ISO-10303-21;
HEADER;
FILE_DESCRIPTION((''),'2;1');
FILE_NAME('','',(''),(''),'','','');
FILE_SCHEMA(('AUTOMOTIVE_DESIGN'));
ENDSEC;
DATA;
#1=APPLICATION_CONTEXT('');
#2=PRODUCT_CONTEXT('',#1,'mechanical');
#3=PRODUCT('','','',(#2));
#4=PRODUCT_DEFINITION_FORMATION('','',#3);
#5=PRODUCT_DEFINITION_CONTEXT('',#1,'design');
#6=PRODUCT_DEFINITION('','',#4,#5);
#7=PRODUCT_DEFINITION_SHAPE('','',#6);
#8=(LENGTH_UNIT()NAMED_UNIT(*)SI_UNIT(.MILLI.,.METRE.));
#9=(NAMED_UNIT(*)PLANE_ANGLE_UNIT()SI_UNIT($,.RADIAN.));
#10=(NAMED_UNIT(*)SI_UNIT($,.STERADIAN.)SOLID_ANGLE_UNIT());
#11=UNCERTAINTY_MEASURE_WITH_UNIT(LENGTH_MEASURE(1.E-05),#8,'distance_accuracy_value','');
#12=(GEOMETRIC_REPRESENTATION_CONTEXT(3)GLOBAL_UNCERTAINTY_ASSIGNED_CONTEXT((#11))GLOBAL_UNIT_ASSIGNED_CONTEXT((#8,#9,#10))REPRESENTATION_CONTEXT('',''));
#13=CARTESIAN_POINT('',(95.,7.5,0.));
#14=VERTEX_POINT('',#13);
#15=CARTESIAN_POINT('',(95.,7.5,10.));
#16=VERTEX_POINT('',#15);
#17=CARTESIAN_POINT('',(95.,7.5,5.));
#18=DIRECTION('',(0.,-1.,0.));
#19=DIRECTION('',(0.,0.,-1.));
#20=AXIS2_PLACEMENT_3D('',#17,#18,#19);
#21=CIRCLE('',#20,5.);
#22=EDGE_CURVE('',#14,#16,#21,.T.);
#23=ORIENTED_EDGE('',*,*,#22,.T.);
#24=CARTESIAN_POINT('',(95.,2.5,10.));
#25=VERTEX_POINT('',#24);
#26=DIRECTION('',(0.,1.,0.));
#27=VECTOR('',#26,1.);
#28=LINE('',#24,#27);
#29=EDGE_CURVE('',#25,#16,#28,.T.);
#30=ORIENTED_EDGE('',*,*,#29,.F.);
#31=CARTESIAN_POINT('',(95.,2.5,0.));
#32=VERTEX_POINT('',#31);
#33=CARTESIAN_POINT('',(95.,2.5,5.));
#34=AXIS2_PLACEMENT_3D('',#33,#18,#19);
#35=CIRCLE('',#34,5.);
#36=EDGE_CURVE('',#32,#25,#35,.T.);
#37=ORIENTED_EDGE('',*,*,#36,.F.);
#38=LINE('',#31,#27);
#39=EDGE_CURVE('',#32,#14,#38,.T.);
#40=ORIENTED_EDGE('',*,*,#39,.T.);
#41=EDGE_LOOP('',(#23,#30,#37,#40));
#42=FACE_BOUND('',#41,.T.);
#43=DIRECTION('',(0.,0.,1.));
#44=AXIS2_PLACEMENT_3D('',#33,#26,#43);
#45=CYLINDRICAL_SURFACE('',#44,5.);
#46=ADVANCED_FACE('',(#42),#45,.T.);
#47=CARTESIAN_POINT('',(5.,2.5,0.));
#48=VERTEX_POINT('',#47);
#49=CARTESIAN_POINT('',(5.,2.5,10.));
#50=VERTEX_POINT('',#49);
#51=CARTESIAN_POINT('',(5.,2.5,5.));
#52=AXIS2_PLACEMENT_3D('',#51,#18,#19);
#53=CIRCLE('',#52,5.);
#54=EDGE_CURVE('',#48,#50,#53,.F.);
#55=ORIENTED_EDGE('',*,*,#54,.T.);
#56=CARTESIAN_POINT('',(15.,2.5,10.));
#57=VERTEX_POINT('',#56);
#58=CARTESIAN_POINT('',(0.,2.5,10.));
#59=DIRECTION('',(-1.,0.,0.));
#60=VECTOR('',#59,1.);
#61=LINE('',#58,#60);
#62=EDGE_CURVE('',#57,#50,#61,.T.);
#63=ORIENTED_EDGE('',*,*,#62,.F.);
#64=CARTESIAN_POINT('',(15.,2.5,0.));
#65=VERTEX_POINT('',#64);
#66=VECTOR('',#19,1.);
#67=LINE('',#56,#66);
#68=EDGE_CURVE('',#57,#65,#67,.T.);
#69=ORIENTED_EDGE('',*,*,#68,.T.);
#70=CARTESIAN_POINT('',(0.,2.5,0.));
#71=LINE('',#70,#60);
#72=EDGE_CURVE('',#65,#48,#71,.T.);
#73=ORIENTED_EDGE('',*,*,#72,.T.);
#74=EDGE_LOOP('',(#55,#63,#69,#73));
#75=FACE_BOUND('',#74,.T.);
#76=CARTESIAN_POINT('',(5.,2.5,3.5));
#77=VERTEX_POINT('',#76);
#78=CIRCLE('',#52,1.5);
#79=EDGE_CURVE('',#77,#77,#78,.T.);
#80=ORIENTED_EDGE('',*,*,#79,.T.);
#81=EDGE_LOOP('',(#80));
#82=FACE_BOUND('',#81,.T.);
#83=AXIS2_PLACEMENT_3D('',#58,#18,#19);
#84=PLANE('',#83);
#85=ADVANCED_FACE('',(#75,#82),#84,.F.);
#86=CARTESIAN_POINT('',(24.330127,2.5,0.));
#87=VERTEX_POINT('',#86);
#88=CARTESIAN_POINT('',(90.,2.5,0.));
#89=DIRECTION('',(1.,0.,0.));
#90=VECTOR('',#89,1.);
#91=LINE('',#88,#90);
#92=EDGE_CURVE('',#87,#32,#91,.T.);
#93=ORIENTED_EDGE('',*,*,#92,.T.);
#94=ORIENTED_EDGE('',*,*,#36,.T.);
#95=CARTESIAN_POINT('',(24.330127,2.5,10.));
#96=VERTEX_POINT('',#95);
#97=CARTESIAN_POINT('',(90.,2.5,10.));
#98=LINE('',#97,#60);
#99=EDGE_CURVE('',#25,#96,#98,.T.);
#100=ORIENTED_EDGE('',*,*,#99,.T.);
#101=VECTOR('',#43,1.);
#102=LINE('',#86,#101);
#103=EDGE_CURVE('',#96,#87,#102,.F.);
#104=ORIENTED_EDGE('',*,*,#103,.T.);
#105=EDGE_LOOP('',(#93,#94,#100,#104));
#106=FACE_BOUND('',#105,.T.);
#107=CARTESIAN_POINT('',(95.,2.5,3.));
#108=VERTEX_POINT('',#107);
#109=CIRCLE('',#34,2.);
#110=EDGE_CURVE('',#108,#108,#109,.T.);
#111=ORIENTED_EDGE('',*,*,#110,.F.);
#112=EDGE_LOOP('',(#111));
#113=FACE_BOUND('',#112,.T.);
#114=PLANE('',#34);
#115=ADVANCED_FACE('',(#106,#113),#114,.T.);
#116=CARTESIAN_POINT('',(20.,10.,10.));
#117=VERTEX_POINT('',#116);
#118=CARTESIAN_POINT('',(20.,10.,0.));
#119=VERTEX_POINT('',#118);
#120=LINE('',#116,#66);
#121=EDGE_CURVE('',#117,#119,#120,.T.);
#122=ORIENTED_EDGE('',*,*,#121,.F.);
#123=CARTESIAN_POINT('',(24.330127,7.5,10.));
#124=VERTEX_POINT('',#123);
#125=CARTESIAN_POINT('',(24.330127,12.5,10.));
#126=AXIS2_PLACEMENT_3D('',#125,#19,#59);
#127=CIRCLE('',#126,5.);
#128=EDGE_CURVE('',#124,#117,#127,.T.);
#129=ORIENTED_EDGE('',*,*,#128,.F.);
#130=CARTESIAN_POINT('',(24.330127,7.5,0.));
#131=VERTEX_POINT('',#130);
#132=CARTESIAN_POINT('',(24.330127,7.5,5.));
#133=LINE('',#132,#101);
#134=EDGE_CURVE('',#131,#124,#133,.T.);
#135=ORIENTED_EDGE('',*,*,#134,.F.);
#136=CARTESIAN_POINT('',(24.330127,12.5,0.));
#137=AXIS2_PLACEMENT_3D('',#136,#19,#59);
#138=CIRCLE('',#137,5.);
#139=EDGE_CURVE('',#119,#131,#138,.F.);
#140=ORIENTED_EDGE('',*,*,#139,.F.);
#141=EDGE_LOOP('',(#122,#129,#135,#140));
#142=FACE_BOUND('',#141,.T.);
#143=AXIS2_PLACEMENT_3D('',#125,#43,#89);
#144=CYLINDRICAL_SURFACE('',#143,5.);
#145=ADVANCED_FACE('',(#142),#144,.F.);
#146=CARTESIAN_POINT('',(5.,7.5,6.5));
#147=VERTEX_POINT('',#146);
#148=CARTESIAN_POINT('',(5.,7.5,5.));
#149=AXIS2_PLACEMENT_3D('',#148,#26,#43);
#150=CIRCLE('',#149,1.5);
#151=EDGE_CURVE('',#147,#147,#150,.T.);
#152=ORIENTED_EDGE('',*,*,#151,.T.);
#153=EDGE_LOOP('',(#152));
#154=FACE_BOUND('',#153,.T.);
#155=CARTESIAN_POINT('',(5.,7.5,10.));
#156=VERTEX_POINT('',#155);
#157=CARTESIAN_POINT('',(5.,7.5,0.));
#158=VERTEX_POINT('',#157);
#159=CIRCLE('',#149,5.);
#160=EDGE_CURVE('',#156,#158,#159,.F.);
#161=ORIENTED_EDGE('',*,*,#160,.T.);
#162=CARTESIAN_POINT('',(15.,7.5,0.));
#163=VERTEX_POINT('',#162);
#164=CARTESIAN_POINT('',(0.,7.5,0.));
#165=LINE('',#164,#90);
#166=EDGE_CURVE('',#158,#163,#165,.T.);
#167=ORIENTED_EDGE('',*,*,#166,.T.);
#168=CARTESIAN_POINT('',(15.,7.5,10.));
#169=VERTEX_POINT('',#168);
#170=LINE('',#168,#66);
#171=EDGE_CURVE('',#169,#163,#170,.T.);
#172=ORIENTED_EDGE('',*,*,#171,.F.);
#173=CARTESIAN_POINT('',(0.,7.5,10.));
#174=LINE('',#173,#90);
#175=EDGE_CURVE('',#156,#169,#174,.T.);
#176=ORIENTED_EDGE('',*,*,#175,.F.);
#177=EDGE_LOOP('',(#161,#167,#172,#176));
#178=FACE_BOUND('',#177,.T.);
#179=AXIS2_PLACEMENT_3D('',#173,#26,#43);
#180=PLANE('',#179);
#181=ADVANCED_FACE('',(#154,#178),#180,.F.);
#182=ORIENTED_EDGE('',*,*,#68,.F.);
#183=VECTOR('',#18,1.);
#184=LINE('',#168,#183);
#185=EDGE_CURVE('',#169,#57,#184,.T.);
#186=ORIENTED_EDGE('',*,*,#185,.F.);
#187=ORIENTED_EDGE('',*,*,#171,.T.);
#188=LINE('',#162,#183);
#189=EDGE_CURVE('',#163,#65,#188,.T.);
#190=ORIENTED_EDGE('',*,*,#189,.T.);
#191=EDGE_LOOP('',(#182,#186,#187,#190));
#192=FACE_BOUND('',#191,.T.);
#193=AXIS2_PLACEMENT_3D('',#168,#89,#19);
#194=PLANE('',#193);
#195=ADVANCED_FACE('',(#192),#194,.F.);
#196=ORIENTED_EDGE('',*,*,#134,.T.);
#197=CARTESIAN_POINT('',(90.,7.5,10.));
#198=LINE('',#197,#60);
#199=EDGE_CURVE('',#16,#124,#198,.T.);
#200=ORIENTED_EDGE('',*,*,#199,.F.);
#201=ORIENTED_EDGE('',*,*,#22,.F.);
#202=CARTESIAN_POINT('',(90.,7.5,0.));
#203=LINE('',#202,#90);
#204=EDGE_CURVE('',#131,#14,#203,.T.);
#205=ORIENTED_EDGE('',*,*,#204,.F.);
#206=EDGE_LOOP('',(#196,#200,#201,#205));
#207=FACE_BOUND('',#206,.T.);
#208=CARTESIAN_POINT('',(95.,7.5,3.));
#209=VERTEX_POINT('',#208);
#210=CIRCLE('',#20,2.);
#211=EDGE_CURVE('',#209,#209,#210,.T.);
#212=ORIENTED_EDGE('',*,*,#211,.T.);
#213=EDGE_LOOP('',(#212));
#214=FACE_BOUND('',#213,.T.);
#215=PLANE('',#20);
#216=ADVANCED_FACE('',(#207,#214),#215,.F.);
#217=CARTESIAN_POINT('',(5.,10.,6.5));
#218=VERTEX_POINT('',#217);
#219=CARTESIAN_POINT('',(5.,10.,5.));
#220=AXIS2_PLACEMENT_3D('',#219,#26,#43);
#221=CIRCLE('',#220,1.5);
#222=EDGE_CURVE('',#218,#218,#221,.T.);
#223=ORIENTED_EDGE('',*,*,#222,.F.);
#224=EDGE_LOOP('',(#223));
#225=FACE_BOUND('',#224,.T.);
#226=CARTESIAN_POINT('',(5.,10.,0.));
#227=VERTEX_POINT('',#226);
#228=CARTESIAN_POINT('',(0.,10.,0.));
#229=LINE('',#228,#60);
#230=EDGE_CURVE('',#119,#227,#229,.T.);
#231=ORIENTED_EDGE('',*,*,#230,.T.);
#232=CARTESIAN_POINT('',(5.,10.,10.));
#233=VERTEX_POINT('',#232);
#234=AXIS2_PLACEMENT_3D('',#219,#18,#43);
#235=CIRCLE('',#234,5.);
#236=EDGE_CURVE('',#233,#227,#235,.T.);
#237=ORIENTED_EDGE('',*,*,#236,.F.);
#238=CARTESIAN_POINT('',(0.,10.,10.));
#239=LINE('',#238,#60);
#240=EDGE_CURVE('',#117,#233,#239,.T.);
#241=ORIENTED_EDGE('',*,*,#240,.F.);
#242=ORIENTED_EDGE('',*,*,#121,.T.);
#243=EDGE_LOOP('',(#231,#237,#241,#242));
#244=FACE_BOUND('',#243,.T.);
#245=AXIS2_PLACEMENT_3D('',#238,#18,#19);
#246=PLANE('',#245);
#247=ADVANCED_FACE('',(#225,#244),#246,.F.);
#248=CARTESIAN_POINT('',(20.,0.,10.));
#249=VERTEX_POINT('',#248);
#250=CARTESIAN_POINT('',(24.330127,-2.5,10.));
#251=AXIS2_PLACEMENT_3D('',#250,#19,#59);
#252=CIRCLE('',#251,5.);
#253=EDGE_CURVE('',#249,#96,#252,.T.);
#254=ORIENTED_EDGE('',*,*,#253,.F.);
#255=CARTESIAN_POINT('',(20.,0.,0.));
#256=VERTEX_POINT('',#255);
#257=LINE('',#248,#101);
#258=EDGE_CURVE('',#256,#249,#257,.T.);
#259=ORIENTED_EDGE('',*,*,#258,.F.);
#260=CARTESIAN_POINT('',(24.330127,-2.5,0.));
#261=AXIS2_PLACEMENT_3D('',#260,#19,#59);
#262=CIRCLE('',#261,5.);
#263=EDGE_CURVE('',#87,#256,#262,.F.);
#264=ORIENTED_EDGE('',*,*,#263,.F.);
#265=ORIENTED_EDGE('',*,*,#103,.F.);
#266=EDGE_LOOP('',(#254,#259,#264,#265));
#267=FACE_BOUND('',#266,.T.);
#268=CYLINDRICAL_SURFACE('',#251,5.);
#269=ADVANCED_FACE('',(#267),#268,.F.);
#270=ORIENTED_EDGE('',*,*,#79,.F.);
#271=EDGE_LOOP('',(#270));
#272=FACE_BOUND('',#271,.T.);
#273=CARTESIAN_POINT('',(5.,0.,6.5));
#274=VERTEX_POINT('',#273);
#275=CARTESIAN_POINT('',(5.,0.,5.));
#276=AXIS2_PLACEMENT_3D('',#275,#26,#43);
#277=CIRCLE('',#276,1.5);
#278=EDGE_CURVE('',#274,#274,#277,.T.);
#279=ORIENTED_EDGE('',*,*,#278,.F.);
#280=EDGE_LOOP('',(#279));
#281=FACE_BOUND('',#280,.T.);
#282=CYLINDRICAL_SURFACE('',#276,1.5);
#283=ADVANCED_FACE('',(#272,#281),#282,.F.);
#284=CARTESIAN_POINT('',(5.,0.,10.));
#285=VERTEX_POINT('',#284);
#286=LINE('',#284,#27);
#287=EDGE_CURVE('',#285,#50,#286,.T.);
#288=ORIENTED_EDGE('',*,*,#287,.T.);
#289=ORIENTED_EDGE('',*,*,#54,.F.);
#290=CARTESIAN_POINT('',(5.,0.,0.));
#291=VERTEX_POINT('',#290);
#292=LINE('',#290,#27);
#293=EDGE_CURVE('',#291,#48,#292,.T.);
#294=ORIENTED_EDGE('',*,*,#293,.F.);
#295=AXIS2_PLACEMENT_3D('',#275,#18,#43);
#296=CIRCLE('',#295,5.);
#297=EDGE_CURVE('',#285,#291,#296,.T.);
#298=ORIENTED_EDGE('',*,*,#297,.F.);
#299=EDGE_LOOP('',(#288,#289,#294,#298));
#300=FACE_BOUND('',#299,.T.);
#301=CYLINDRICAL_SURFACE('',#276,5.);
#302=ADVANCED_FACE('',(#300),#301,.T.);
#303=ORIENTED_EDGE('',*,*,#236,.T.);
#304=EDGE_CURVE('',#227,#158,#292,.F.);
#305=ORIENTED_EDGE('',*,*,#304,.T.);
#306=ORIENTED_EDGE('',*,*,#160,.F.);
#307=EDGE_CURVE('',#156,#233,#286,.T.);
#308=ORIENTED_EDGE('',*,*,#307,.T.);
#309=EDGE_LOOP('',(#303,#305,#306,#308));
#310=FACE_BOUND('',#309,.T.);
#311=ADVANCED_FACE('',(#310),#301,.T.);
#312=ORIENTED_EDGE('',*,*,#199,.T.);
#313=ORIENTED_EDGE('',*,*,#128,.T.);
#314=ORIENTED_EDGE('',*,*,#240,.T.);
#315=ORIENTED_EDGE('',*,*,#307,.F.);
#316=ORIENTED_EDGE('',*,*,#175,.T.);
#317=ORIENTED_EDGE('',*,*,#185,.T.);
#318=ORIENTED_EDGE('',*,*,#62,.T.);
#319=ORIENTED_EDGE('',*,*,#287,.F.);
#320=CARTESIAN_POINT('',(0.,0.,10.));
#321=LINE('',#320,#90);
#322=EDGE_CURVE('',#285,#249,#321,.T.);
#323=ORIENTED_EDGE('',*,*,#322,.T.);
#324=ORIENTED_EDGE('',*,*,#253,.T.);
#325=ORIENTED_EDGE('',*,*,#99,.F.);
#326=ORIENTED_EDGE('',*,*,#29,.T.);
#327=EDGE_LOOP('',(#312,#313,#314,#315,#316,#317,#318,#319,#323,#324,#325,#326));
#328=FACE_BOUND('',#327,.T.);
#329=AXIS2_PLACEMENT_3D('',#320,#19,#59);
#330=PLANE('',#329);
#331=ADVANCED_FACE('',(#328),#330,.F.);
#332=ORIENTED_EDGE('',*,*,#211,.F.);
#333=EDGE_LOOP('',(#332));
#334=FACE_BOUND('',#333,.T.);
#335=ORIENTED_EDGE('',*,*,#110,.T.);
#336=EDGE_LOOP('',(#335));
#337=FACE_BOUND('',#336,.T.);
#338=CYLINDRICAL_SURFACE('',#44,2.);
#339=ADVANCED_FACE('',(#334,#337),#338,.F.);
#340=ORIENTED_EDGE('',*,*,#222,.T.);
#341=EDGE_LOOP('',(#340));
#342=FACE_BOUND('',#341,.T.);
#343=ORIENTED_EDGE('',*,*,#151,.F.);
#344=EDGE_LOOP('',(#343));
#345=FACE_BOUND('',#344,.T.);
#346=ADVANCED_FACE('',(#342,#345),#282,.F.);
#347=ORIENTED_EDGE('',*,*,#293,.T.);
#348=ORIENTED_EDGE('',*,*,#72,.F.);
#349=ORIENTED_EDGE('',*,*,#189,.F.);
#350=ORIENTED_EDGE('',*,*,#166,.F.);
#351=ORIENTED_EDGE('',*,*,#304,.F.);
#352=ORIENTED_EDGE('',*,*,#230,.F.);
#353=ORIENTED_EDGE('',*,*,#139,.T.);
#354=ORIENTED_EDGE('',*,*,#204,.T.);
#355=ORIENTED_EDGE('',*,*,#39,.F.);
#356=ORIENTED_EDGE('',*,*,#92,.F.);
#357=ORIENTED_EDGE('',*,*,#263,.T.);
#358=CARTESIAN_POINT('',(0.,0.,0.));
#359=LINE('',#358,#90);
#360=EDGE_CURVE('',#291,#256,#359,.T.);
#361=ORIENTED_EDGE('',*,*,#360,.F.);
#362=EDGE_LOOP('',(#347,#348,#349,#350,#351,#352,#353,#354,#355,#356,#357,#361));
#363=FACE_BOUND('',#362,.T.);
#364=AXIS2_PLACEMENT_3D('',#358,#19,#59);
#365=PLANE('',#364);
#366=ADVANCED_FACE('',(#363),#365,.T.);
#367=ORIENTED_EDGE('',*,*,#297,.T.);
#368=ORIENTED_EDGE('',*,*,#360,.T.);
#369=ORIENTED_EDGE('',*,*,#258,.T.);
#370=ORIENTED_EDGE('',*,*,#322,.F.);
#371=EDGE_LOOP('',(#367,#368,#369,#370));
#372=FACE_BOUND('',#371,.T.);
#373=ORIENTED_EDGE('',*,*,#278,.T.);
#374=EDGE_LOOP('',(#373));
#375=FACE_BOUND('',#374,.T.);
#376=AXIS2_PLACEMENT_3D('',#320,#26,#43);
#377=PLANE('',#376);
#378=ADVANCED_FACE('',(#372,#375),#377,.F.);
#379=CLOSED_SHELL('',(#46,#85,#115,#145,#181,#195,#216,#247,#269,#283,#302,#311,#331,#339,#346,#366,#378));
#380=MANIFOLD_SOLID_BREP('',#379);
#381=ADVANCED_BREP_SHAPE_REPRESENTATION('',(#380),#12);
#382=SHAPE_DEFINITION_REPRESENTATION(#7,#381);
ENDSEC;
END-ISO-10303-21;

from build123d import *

# Parameters (mm, degrees)
SALIENTE_EXTRUIR1_DEPTH = 10
CROQUIS2_R              = 1.5
CORTAR_EXTRUIR1_DEPTH   = 10
CROQUIS3_W              = 15
CROQUIS3_H              = 2.5
CORTAR_EXTRUIR2_DEPTH   = 10
CROQUIS4_R              = 1.5
CORTAR_EXTRUIR3_DEPTH   = 10
CORTAR_EXTRUIR5_DEPTH   = 10
CROQUIS9_R              = 2
SALIENTE_EXTRUIR2_DEPTH = 2.5
CROQUIS10_W             = 80
CROQUIS10_H             = 16.68210675
CROQUIS10_H_2           = 15.952607418
CORTAR_EXTRUIR6_DEPTH   = 10
REDONDEO1_R             = 5


with BuildPart() as part:
    # Croquis1 → Saliente-Extruir1 (new body)
    with BuildSketch(Plane.XY):
        Polygon((0, 0), (105, 0), (105, 2.5), (105, 7.5), (105, 10), (0, 10), (0, 7.5), (15, 7.5), (15, 2.5), (0, 2.5), align=None)
    extrude(amount=SALIENTE_EXTRUIR1_DEPTH)

    # Croquis2 → Cortar-Extruir1 (cut)
    with BuildSketch(Plane(origin=(0, 10, 0), x_dir=(1, 0, 0), z_dir=(0, 1, 0))):
        with Locations(Location((5, -5, 0), (0, 0, 270))):
            Circle(CROQUIS2_R)
        with BuildLine():
            Line((-4.031911586, 0), (5, 0))
            ThreePointArc((5, 0), (0, -5), (5, -10))
            Line((5, -10), (-4.031911586, -10))
            Line((-4.031911586, -10), (-4.031911586, 0))
        make_face()
    extrude(amount=-CORTAR_EXTRUIR1_DEPTH, mode=Mode.SUBTRACT)

    # Croquis3 → Cortar-Extruir2 (cut)
    with BuildSketch(Plane(origin=(0, 10, 0), x_dir=(1, 0, 0), z_dir=(0, 1, 0))):
        with Locations((97.5, -1.25)):
            Rectangle(CROQUIS3_W, CROQUIS3_H)
        with Locations((97.5, -8.75)):
            Rectangle(CROQUIS3_W, CROQUIS3_H)
    extrude(amount=-CORTAR_EXTRUIR2_DEPTH, mode=Mode.SUBTRACT)

    # Croquis4 → Cortar-Extruir3 (cut)
    with BuildSketch(Plane.XY.offset(7.5)):
        with Locations((100, 5)):
            Circle(CROQUIS4_R)
        with BuildLine():
            Line((100, 10), (171.112400038, 10))
            Line((171.112400038, 10), (171.112400038, 0))
            Line((171.112400038, 0), (100, 0))
            ThreePointArc((100, 0), (105, 5), (100, 10))
        make_face()
    extrude(amount=-CORTAR_EXTRUIR3_DEPTH, mode=Mode.SUBTRACT)

    # Croquis8 → Cortar-Extruir5 (cut)
    with BuildSketch(Plane.XY.offset(7.5)):
        with BuildLine():
            Line((90, 0), (100, 0))
            ThreePointArc((100, 0), (105, 5), (100, 10))
            Line((100, 10), (90, 10))
            Line((90, 10), (90, 0))
        make_face()
    extrude(amount=-CORTAR_EXTRUIR5_DEPTH, mode=Mode.SUBTRACT)

    # Croquis9 → Saliente-Extruir2 (add, symmetric)
    with BuildSketch(Plane(origin=(0, 5, 0), x_dir=(-1, 0, 0), z_dir=(0, -1, 0))):
        with BuildLine():
            Line((-90, -10), (-95, -10))
            ThreePointArc((-95, -10), (-100, -5), (-95, 0))
            Line((-95, 0), (-90, 0))
            Line((-90, 0), (-90, -10))
        make_face()
        with Locations(Location((-95, -5, 0), (0, 0, 90))):
            Circle(CROQUIS9_R, mode=Mode.SUBTRACT)
    extrude(amount=SALIENTE_EXTRUIR2_DEPTH, both=True)

    # Croquis10 → Cortar-Extruir6 (cut)
    with BuildSketch(Plane(origin=(0, 0, 0), x_dir=(-1, 0, 0), z_dir=(0, 0, -1))):
        with Locations((-60, 15.841053375)):
            Rectangle(CROQUIS10_W, CROQUIS10_H)
        with Locations((-60, -5.476303709)):
            Rectangle(CROQUIS10_W, CROQUIS10_H_2)
    extrude(amount=-CORTAR_EXTRUIR6_DEPTH, mode=Mode.SUBTRACT)

    # Redondeo1
    # the kernel refuses this fillet: 5 mm, written as the material it adds along each edge
    with BuildSketch(Plane(origin=(20, 2.5, 0), x_dir=(1, 0, 0), z_dir=(0, 0, 1))) as redondeo1_piece_1:
        with BuildLine():
            CenterArc((4.330127019, -5), REDONDEO1_R, 90, 60)
            Line((0, -2.5), (-0.08660254, -2.45))
            ThreePointArc((-0.08660254, -2.45), (-0.1, -1.25), (-0.1, 0))
            Line((-0.1, 0), (0, 0.1))
            Line((0, 0.1), (4.330127019, 0.1))
            Line((4.330127019, 0.1), (4.330127019, 0))
        make_face()
    extrude(amount=10)
    with BuildSketch(Plane(origin=(20, 7.5, 0), x_dir=(0, 1, 0), z_dir=(0, 0, 1))) as redondeo1_piece_2:
        with BuildLine():
            CenterArc((5, -4.330127019), REDONDEO1_R, 120, 60)
            Line((0, -4.330127019), (-0.1, -4.330127019))
            Line((-0.1, -4.330127019), (-0.1, 0))
            Line((-0.1, 0), (0, 0.1))
            ThreePointArc((0, 0.1), (1.25, 0.1), (2.45, 0.08660254))
            Line((2.45, 0.08660254), (2.5, 0))
        make_face()
    extrude(amount=10)


solid = part.part
